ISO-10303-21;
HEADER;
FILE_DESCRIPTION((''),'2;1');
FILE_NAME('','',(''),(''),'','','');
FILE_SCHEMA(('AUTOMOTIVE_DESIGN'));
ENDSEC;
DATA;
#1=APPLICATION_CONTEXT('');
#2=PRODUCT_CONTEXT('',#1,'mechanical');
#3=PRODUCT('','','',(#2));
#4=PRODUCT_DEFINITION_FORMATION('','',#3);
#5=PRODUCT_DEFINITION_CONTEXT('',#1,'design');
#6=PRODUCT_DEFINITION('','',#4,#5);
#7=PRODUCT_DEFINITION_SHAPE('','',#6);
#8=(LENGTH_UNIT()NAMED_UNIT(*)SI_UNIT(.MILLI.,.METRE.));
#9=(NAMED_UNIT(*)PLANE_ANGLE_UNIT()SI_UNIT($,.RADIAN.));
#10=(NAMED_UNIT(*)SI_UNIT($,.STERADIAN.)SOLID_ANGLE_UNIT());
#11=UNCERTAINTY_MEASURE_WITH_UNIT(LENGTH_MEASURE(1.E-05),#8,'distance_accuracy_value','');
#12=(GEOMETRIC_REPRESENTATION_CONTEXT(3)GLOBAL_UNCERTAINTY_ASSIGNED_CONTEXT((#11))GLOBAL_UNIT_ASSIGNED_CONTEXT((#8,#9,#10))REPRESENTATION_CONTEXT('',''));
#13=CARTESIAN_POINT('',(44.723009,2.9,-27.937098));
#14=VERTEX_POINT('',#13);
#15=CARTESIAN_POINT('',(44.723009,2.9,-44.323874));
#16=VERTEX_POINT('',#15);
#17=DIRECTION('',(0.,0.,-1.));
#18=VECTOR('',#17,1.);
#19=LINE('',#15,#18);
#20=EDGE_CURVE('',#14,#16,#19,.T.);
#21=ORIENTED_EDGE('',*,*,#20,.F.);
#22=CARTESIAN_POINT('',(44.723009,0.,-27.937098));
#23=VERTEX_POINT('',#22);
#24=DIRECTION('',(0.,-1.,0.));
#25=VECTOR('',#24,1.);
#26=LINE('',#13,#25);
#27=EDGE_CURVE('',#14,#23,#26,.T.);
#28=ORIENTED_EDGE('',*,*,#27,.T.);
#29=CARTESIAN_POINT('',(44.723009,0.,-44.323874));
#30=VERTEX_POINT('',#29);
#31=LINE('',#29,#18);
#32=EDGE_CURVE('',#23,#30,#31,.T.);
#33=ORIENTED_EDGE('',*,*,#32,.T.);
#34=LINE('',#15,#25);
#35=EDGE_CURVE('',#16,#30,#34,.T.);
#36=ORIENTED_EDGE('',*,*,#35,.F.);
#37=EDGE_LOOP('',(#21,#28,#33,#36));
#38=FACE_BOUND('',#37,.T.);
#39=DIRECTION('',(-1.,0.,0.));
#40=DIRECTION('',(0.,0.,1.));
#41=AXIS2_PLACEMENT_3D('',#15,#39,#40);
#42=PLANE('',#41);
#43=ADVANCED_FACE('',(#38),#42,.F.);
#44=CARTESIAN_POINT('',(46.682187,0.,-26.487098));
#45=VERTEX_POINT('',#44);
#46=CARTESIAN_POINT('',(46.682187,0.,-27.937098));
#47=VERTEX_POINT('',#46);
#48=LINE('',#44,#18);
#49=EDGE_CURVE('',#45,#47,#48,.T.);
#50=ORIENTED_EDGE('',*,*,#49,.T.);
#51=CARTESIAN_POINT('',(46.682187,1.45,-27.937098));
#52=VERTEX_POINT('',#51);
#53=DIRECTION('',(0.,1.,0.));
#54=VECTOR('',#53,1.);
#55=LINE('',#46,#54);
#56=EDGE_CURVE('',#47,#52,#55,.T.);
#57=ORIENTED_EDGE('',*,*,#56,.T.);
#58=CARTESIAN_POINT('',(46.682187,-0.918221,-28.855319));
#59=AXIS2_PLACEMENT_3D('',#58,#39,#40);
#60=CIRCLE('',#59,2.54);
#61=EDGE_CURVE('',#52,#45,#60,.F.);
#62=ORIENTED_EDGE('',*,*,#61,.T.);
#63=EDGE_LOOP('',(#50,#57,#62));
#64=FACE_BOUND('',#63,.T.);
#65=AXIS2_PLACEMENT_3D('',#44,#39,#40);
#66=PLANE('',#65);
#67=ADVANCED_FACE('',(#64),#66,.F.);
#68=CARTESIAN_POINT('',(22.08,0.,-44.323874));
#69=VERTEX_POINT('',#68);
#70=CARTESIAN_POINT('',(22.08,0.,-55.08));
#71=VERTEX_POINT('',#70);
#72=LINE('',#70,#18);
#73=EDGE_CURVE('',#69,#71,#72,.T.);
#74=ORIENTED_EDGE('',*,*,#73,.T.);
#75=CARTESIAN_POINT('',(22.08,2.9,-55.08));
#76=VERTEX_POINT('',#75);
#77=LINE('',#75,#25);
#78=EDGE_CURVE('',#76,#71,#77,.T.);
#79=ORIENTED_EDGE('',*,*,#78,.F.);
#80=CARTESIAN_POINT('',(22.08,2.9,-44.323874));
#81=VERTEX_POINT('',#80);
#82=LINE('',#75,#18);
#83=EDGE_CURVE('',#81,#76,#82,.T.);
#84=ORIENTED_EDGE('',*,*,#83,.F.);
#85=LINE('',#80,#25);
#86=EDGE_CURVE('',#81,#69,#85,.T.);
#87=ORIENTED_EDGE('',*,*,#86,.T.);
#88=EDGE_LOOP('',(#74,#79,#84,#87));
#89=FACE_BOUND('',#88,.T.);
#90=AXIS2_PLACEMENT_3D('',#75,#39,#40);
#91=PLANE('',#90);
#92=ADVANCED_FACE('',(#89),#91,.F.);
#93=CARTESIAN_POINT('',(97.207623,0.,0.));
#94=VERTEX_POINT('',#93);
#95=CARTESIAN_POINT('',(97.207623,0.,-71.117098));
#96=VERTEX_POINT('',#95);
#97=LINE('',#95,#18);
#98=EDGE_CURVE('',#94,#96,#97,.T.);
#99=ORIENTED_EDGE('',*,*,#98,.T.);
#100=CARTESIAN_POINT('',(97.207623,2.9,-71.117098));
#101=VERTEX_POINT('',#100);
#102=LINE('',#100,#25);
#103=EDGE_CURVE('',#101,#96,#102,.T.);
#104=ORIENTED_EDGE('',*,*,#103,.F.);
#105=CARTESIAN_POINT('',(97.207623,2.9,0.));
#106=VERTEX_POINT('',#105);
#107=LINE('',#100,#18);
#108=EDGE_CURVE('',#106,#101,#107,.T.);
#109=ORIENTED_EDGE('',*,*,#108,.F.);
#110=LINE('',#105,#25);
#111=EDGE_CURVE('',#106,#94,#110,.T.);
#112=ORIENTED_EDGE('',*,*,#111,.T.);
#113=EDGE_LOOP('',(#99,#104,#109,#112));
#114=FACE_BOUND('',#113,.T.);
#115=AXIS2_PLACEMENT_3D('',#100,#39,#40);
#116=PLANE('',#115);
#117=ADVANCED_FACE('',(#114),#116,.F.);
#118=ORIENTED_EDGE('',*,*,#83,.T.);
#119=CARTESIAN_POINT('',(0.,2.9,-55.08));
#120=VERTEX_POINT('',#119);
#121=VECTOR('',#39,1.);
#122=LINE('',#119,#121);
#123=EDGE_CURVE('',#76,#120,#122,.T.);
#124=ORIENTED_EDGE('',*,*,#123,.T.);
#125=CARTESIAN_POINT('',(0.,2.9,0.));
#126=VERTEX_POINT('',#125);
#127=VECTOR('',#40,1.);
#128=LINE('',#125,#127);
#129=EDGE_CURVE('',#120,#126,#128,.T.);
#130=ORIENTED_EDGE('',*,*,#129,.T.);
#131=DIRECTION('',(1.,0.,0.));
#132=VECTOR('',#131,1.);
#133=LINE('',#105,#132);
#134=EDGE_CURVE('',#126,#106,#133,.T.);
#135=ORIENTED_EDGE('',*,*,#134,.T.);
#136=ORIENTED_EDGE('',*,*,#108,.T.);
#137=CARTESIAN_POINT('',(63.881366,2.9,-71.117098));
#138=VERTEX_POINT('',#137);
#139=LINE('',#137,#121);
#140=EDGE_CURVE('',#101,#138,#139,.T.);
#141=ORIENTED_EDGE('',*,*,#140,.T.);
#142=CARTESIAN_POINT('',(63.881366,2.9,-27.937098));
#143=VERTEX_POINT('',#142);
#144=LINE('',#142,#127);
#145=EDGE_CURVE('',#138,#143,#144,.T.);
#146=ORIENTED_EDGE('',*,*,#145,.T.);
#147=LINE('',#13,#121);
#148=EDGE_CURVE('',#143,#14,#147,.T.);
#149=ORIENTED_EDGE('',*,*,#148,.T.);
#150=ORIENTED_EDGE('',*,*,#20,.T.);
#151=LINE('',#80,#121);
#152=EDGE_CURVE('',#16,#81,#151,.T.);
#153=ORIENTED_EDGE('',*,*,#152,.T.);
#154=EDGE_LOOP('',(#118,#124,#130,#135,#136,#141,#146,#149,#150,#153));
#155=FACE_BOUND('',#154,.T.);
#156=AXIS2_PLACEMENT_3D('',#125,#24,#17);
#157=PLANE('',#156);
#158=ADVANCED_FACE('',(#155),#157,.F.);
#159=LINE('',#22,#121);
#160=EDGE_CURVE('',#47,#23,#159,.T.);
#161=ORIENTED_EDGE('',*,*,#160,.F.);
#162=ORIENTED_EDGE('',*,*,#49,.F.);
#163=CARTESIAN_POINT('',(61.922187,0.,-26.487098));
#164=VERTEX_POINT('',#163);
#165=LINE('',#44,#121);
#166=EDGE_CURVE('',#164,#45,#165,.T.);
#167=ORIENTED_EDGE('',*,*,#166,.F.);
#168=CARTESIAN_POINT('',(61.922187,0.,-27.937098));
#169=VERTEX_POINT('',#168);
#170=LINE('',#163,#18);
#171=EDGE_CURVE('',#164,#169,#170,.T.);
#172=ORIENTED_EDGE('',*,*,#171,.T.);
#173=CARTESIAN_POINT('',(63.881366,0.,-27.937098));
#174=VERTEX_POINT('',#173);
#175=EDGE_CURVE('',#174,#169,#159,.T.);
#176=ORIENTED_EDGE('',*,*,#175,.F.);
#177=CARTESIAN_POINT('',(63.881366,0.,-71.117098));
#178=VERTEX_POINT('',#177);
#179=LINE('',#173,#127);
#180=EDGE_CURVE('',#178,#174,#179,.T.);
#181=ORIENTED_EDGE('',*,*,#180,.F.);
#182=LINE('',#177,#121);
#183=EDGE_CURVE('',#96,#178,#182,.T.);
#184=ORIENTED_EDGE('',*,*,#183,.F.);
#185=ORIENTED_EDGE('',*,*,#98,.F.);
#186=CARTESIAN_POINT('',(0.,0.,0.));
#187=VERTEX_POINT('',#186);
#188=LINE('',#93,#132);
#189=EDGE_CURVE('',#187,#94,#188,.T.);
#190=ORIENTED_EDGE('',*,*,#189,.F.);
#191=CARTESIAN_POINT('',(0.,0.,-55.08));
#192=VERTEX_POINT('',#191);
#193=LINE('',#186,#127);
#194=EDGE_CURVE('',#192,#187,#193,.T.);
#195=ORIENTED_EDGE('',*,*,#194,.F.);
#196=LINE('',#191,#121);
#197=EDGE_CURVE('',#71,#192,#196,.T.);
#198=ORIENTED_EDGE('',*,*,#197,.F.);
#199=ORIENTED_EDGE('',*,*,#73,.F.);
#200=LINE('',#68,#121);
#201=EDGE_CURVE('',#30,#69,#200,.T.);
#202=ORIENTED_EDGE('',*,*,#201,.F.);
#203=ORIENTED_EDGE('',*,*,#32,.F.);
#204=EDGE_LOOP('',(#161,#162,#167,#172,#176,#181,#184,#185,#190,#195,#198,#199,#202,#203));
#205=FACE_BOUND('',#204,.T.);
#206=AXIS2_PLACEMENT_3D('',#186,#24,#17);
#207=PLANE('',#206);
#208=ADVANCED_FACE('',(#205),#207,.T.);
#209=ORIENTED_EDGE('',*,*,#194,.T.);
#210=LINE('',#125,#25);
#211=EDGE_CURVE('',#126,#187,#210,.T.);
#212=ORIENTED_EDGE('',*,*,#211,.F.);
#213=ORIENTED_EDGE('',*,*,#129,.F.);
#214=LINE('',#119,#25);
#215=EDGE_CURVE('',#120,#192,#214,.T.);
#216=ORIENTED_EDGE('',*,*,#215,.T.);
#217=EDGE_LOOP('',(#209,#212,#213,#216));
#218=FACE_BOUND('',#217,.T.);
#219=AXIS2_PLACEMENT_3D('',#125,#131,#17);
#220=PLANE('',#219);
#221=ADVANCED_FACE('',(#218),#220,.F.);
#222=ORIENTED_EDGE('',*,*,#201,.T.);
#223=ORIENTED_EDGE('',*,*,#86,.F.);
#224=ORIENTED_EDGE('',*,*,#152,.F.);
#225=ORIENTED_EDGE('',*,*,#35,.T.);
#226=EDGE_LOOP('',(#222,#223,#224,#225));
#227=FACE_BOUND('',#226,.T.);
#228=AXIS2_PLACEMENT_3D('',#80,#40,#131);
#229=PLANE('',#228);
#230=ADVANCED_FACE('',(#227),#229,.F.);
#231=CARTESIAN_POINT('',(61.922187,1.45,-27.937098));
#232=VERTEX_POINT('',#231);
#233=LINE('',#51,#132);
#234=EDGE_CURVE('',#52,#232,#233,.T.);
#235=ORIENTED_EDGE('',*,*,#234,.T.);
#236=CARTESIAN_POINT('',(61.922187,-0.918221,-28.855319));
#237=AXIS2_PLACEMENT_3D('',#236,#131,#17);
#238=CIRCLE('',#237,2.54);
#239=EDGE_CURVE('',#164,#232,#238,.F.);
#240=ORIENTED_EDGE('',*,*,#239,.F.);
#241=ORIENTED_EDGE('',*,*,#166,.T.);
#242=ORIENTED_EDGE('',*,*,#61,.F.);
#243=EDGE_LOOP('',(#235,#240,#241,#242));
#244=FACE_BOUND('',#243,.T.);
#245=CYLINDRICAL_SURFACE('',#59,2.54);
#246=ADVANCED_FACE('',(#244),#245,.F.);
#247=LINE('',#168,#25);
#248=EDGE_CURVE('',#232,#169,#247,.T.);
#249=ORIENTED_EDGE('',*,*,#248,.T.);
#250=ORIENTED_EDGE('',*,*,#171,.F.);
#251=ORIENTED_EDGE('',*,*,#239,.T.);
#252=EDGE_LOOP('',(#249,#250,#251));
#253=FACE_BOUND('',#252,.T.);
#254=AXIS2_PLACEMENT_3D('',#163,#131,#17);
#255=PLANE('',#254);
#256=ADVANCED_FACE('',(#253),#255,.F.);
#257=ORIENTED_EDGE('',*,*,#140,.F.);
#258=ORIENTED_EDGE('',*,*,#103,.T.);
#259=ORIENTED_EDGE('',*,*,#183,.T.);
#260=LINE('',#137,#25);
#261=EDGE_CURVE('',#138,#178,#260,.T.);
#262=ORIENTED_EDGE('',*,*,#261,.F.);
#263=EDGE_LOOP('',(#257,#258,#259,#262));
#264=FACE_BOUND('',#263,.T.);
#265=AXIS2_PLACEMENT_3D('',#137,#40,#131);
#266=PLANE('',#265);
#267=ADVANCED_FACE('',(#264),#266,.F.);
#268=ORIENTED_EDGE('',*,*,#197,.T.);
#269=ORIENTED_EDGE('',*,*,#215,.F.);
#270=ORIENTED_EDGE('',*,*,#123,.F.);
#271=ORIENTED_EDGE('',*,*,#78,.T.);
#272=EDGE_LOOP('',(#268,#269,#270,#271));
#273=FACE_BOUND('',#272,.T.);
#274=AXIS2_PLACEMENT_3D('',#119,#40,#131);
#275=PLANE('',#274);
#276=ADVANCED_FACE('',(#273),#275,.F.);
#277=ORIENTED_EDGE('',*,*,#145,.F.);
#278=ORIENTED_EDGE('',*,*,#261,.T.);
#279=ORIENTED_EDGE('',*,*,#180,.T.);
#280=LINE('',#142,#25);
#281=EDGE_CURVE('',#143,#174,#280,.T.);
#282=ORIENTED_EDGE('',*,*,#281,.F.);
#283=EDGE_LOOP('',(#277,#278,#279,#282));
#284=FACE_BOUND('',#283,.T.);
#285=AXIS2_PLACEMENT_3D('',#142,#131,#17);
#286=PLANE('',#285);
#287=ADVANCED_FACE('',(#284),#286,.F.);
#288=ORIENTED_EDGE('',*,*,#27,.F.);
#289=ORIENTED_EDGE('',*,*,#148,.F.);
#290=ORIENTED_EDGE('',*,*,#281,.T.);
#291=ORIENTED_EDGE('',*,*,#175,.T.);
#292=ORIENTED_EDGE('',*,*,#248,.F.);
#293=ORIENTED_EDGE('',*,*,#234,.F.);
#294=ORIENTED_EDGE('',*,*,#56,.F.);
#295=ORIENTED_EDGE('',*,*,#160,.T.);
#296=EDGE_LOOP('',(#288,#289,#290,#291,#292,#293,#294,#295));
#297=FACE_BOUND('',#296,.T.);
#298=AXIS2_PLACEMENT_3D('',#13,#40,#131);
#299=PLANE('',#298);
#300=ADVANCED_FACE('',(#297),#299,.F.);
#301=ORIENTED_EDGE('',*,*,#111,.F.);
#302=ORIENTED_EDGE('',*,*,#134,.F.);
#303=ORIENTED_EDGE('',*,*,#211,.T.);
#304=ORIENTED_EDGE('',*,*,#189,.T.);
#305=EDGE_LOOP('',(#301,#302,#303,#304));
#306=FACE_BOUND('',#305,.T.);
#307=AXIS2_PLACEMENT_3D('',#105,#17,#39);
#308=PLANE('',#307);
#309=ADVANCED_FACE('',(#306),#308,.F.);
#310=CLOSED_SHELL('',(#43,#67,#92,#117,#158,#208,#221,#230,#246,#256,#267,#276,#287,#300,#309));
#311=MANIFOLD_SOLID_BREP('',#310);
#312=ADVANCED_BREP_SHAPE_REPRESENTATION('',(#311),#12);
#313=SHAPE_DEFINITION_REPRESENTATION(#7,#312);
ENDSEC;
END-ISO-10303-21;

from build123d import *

# Parameters (mm, degrees)
BOSS_EXTRUDE1_DEPTH = 2.9
SKETCH2_W           = 15.24
SKETCH2_H           = 1.45
CUT_EXTRUDE1_DEPTH  = 1.45
FILLET2_R           = 2.54


with BuildPart() as part:
    # Sketch1 → Boss-Extrude1 (new body)
    with BuildSketch(Plane(origin=(0, 0, 0), x_dir=(1, 0, 0), z_dir=(0, 1, 0))):
        Polygon((0, 0), (0, 55.080000076), (22.080000036, 55.080000076), (22.080000036, 44.32387376), (44.723008852, 44.32387376), (44.723008852, 27.937097796), (63.88136576, 27.937097796), (63.88136576, 71.117097796), (97.207622704, 71.117097796), (97.207622704, 0), align=None)
    extrude(amount=BOSS_EXTRUDE1_DEPTH)

    # Sketch2 → Cut-Extrude1 (cut)
    with BuildSketch(Plane(origin=(0, 0, -27.937097796), x_dir=(-1, 0, 0), z_dir=(0, 0, -1))):
        with Locations((-54.302187306, 0.725)):
            Rectangle(SKETCH2_W, SKETCH2_H)
    extrude(amount=-CUT_EXTRUDE1_DEPTH, mode=Mode.SUBTRACT)

    # Fillet2
    # the kernel refuses this fillet: 2.54 mm, written as the material it adds along each edge
    with BuildSketch(Plane(origin=(65.547187306, 1.45, -26.487097796), x_dir=(0, -1, 0), z_dir=(-1, 0, 0))) as fillet2_piece_1:
        with BuildLine():
            CenterArc((2.368220922, -2.368220922), FILLET2_R, 111.192609021, 47.614781958)
            Line((0, -1.45), (0, 0))
            Line((0, 0), (1.45, 0))
        make_face()
    extrude(amount=22.49)


solid = part.part
